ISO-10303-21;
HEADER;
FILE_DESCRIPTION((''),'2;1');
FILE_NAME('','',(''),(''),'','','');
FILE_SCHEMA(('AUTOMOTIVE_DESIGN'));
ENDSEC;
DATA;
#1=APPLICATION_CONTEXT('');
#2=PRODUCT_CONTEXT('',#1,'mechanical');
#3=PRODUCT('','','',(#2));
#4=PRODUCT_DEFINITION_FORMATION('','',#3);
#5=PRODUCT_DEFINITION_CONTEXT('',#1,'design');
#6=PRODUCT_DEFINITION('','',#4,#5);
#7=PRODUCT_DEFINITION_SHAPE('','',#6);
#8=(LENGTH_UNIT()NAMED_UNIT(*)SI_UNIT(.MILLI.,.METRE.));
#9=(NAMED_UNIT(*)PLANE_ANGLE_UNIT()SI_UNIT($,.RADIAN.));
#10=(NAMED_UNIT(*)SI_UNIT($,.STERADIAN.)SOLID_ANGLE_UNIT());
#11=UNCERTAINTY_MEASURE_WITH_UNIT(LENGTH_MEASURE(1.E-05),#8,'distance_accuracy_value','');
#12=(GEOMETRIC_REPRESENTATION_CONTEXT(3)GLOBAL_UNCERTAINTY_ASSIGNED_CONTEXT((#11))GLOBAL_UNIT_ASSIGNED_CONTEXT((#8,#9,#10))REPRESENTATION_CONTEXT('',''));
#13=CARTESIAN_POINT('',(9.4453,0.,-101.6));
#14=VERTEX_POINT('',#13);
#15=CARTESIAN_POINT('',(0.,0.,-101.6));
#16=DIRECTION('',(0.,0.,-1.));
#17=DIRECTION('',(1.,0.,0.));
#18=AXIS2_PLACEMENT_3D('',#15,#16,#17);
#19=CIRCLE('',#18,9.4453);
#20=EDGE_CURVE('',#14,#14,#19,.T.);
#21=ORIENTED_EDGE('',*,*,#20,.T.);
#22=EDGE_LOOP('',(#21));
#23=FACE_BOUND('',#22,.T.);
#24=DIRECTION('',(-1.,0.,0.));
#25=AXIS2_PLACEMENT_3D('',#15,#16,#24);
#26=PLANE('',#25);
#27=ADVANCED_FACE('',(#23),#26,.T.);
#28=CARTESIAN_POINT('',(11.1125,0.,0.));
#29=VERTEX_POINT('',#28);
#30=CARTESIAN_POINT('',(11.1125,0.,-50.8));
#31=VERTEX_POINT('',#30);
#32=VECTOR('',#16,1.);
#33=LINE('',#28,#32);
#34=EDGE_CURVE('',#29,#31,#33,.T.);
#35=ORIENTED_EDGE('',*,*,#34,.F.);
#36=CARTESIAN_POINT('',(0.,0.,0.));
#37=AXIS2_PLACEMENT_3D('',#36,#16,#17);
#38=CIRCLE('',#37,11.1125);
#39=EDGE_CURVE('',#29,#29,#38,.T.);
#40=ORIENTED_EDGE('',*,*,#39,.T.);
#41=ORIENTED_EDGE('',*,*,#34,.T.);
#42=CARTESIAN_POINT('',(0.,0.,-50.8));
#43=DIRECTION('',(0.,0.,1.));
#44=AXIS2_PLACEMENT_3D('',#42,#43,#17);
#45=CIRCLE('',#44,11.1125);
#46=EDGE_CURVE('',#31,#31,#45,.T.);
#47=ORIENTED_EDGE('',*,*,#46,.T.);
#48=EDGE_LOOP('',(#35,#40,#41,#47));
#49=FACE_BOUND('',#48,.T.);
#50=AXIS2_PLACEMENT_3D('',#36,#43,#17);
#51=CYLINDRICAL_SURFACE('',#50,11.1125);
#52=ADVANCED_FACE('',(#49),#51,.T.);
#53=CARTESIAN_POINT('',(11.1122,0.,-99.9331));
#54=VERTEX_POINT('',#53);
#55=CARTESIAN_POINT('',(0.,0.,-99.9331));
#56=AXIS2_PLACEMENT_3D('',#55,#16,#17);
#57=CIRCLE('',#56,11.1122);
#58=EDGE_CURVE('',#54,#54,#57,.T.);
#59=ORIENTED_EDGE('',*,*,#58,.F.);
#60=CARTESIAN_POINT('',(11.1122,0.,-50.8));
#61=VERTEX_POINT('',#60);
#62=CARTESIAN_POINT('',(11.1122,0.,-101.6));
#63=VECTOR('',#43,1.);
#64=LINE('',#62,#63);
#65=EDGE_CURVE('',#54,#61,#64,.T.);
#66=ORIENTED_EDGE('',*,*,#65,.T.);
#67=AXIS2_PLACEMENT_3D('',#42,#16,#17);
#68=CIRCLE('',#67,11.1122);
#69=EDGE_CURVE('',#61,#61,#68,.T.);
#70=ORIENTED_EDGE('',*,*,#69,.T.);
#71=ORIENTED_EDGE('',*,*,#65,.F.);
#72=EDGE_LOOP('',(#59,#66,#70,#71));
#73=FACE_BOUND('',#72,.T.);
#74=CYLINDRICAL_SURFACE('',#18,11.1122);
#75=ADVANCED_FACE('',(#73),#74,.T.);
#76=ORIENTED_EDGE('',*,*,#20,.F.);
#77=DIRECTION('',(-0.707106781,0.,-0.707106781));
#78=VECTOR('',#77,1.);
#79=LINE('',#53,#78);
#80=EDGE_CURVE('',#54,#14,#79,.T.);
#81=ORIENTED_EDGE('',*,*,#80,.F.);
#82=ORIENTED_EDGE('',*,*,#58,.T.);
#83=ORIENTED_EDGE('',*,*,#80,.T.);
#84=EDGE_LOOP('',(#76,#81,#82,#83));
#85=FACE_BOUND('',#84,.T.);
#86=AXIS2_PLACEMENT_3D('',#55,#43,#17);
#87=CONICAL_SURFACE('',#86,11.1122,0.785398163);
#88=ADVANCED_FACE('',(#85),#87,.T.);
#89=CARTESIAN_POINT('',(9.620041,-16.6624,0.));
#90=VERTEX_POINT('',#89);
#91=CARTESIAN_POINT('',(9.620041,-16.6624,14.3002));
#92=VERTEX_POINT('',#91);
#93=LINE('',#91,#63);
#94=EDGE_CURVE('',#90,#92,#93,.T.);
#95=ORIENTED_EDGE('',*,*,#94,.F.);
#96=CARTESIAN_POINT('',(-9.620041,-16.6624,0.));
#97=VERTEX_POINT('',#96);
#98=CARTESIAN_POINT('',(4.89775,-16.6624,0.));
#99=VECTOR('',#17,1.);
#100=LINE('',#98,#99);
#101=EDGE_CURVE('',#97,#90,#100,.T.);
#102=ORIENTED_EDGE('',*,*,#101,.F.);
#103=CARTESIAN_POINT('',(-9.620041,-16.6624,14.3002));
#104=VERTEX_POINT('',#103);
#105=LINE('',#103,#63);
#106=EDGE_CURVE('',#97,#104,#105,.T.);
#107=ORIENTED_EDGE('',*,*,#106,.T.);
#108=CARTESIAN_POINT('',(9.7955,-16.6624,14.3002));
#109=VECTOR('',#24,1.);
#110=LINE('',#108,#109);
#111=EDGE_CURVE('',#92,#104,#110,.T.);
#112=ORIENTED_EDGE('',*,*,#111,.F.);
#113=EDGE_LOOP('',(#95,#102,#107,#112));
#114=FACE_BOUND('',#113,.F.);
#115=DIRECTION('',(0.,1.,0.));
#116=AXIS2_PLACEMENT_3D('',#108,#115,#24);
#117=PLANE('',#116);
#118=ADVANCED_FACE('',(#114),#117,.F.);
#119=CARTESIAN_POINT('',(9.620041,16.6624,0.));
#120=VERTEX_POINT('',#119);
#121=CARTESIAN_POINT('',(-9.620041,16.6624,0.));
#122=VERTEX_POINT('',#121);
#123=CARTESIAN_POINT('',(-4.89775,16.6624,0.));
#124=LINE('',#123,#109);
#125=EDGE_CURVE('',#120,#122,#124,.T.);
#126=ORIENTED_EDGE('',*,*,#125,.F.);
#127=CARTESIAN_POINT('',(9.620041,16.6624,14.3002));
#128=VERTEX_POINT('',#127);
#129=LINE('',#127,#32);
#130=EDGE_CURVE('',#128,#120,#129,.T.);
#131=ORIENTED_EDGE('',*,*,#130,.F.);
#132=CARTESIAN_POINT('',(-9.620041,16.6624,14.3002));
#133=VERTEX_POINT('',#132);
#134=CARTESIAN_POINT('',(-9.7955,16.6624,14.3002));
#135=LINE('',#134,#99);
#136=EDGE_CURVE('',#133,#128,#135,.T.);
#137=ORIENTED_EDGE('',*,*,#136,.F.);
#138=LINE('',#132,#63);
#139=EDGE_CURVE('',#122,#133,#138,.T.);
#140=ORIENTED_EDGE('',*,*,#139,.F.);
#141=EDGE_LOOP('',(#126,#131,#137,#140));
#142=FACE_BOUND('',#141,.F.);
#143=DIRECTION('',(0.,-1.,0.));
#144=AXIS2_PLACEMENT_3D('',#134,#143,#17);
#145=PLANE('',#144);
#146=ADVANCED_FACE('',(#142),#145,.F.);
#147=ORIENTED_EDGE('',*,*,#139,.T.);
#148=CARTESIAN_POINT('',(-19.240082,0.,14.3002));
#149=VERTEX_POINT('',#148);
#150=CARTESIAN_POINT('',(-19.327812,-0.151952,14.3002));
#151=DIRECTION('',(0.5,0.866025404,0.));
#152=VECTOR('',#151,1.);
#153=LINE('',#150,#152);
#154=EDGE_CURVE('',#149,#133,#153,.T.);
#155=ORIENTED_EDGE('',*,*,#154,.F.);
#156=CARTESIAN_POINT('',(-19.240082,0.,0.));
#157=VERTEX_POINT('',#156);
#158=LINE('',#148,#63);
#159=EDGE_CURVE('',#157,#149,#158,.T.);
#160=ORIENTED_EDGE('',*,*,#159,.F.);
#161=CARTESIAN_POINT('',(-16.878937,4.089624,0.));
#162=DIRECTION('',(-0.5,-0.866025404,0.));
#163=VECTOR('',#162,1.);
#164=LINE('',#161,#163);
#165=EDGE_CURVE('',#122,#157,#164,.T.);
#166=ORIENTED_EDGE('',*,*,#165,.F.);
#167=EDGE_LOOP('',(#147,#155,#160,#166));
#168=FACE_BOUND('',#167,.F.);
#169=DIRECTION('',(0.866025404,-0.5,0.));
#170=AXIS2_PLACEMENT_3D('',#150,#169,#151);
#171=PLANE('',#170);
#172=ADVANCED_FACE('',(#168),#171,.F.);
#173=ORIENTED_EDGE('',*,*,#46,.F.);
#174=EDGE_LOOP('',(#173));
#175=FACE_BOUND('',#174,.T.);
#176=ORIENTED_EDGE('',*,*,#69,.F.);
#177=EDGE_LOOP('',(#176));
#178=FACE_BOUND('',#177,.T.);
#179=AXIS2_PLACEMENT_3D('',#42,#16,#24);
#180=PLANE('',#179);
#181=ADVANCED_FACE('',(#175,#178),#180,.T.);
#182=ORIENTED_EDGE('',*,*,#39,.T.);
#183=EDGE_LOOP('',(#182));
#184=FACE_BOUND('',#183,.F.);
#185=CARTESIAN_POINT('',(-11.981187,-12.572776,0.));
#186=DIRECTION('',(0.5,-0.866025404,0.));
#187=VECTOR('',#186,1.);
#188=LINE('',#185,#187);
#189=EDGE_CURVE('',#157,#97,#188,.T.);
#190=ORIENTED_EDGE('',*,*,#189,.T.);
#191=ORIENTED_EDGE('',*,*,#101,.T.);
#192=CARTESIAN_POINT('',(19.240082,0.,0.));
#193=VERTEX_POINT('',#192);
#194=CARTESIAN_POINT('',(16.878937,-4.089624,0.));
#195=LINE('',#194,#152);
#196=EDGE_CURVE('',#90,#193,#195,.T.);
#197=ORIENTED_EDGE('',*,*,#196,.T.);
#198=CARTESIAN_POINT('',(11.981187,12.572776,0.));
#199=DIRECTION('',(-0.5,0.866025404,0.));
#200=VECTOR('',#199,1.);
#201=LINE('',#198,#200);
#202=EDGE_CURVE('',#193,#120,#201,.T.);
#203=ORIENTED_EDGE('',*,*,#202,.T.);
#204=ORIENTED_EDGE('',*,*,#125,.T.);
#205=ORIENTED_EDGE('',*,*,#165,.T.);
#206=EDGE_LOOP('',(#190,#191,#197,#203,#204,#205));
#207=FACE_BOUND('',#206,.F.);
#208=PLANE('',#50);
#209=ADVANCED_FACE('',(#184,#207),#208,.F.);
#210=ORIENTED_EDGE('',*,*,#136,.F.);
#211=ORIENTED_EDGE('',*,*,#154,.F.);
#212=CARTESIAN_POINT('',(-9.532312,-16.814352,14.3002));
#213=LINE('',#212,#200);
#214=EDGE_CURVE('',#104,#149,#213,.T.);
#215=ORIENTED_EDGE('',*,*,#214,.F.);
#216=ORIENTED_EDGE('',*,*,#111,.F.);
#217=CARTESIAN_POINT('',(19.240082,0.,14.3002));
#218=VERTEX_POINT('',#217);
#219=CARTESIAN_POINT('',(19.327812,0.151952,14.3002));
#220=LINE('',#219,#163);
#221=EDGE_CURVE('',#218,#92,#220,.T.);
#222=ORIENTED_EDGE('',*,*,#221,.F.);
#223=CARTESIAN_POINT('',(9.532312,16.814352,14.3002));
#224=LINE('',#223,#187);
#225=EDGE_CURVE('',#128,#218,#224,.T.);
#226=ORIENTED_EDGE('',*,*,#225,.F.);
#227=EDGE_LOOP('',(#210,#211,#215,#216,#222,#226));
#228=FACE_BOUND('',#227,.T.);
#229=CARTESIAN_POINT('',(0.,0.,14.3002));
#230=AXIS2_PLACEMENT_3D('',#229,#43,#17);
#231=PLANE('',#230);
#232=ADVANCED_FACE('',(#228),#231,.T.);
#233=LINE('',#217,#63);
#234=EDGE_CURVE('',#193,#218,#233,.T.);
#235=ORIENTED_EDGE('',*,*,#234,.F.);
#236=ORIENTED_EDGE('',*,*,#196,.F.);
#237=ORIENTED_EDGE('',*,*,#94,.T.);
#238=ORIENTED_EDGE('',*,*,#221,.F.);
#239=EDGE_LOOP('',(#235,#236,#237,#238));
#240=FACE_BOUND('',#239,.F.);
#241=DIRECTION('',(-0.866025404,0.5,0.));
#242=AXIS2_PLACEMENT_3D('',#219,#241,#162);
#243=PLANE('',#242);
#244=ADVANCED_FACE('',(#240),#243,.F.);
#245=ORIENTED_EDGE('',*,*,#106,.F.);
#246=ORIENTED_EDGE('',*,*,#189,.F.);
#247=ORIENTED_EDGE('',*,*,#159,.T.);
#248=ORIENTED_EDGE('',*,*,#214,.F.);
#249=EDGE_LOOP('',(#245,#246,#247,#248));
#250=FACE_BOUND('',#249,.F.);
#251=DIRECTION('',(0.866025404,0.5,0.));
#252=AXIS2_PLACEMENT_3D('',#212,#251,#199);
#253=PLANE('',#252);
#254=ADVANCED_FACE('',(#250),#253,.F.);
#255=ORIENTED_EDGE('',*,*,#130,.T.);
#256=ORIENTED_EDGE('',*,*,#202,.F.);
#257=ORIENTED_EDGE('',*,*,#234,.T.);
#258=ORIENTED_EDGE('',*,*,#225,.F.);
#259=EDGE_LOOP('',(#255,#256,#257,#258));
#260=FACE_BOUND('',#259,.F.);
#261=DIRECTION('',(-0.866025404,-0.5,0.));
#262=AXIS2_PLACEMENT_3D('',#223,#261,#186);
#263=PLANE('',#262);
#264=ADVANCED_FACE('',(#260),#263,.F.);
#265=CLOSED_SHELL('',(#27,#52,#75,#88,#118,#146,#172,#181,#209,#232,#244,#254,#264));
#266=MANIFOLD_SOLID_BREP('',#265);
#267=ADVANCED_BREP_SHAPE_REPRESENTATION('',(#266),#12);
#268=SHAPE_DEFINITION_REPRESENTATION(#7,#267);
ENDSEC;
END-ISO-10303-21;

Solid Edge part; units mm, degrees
sketch "Sketch1" plane through (0, 0, 0) normal (0, 0, 1) x (1, 0, 0)
  circle A0 centre (0, 0) radius 19.3284
  dimension "D1" = 38.6568
extrude "Protrusion1" add sketch "Sketch1" along normal blind 14.3002
sketch "Sketch2" plane through (0, 0, 0) normal (0, 0, -1) x (1, 0, 0)
  circle A0 centre (0, 0) radius 11.1125
extrude "Protrusion2" add sketch "Sketch2" along normal blind 101.6
sketch "Sketch3" plane through (0, 0, -101.6) normal (0, 0, -1) x (1, 0, 0)
  circle A0 centre (0, 0) radius 11.1122
extrude "Cutout1" cut sketch "Sketch3" against normal blind 50.8 flip side to cut
chamfer "Chamfer_1" distance 1.6669 angle 45 1 edges at (-11.1122, 0, -101.6)
sketch "Sketch4" plane through (0, 0, 14.3002) normal (0, 0, 1) x (1, 0, 0)
  line L0 (-9.7955, 16.6624) -> (9.7955, 16.6624)
  dimension "D1" = 33.3248
extrude "Cutout2" cut sketch "Sketch4" against normal up to next material side at (0, 16.7124, 14.3002)
pattern_circular "Pattern1" count 6 over 360 about axis through (0, 0, 14.3002) along (0, 0, 1) of "Cutout2"
properties part number "24100379"
